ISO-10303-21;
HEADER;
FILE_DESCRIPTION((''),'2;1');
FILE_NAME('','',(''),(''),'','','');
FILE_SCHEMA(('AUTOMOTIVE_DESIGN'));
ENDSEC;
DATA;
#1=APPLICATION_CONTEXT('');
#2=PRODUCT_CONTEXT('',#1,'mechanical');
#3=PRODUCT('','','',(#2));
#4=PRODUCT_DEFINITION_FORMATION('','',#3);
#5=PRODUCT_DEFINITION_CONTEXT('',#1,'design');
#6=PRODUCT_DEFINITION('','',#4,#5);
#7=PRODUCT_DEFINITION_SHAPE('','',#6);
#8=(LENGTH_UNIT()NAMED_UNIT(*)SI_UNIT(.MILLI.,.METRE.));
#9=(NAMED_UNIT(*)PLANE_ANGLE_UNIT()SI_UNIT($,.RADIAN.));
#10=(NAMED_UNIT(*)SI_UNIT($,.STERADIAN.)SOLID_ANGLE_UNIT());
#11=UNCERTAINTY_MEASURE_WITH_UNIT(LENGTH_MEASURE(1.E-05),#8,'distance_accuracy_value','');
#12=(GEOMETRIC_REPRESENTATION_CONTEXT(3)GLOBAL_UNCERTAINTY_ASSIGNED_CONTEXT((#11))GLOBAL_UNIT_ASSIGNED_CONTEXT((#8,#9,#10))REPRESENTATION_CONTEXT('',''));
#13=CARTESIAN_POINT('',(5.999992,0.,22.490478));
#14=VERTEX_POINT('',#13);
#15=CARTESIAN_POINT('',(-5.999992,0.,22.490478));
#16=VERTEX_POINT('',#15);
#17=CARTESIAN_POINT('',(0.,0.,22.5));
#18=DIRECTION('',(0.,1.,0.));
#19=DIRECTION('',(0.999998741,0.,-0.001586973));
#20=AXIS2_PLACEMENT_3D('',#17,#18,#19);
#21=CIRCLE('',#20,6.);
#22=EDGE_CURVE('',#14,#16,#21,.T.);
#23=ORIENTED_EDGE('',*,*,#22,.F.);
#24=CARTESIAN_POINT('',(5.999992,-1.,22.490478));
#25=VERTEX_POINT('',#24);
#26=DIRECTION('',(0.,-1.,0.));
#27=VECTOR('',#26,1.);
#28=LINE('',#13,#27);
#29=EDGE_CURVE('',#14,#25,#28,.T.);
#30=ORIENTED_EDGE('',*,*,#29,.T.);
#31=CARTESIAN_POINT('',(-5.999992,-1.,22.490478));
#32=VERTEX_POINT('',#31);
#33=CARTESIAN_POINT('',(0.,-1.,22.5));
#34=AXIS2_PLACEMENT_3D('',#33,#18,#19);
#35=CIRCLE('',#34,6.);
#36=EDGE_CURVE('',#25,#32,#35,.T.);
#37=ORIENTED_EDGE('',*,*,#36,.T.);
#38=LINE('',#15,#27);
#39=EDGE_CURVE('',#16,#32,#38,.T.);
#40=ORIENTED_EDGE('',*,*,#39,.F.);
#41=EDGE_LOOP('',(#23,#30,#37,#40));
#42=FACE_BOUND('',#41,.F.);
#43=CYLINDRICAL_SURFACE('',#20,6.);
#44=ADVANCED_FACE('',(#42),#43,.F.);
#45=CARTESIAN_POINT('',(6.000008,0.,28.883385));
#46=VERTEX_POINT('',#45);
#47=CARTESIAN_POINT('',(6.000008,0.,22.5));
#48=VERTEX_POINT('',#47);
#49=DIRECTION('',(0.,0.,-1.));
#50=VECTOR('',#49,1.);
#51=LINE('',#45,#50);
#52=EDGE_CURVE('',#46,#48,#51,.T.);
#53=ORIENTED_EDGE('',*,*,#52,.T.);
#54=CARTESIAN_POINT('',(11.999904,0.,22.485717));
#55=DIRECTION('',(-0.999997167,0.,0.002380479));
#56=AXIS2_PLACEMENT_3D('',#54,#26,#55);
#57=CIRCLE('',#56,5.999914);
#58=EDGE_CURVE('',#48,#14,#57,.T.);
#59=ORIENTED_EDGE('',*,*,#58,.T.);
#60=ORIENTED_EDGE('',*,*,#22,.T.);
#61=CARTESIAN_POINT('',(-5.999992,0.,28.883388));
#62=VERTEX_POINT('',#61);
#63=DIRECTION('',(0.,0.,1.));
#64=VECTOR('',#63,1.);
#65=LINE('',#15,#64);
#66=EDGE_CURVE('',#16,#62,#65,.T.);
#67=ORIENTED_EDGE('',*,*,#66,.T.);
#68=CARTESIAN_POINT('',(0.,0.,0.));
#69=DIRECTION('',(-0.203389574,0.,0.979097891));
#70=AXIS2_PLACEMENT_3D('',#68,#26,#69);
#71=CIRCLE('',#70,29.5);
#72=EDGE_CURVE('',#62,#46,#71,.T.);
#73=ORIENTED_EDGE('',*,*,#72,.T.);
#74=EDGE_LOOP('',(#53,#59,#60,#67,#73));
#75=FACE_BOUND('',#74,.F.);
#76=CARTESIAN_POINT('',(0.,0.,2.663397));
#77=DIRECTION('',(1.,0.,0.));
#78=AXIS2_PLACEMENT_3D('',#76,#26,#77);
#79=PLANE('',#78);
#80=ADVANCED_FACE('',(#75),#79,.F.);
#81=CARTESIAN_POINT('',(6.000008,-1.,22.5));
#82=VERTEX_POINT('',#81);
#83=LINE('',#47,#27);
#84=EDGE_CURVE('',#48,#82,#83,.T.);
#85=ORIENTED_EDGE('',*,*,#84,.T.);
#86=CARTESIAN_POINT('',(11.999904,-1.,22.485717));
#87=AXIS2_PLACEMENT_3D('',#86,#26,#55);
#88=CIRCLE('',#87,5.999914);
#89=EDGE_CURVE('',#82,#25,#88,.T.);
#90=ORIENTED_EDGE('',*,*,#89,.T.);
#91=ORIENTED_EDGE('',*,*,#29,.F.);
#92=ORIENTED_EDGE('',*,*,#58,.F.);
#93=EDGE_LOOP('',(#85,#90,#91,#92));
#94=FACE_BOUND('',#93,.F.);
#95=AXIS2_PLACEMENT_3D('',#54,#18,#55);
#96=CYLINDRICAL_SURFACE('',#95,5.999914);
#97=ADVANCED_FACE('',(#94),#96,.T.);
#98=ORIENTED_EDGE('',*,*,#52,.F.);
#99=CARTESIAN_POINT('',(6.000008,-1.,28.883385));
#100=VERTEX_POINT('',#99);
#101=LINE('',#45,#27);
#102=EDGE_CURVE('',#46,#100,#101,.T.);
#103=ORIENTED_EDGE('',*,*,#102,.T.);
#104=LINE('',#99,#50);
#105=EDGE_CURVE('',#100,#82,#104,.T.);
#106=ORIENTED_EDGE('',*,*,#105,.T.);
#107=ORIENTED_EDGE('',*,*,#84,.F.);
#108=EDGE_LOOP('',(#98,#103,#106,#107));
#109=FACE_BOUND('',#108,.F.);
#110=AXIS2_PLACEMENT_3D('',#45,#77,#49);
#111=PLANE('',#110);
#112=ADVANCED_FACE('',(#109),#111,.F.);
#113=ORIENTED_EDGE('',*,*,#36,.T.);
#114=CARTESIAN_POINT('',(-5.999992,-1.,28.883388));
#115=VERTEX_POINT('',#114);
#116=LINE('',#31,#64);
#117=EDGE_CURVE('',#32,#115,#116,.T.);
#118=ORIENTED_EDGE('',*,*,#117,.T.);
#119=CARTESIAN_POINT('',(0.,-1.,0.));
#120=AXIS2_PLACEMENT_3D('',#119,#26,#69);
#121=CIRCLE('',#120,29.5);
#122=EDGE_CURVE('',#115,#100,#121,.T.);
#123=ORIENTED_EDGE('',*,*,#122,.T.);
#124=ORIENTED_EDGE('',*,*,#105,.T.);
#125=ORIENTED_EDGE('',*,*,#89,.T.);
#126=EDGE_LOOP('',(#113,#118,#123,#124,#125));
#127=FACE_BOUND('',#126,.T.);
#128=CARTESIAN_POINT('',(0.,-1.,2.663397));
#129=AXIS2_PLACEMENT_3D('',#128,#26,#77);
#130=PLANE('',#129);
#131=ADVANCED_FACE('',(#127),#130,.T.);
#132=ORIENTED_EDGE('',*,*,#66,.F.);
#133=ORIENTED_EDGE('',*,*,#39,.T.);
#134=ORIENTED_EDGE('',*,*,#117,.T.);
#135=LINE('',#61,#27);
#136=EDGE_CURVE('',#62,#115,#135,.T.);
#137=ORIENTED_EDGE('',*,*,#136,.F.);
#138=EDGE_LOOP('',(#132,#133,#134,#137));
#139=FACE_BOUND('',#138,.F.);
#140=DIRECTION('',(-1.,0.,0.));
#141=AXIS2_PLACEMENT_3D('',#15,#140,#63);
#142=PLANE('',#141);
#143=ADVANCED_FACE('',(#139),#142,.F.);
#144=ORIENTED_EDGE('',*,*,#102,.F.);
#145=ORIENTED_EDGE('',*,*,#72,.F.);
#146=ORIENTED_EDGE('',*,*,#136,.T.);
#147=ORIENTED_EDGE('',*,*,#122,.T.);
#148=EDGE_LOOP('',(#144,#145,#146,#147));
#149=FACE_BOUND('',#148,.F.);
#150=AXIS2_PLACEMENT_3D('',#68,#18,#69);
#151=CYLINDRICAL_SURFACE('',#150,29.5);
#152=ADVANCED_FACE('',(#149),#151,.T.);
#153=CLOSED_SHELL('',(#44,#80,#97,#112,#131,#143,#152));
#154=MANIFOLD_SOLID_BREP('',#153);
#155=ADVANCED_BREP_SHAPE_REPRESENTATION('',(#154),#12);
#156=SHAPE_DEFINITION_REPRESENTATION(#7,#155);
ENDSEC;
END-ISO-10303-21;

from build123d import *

# Parameters (mm, degrees)
F1_DEPTH = 1


# Not quite as in the source:
# - ends of sketch curves that miss each other by under 0.0002 mm in the source are joined


with BuildPart() as f1:
    # F0 (on Front) → F1 (new body)
    with BuildSketch(Plane.XZ):
        with BuildLine():
            ThreePointArc((-5.9999924445, 28.8833877976), (-18.6178707548, -22.8828514079), (29.5, 0))
            ThreePointArc((29.5, 0), (22.8828562781, 18.617864769), (6.0000075555, 28.8833846586))
            Line((6.0000075555, 28.8833846586), (6.0000075555, 22.5))
            ThreePointArc((6.0000075555, 22.5), (5.9999981111, 22.4952390788), (5.9999924445, 22.4904781605))
            ThreePointArc((5.9999924445, 22.4904781605), (1.2e-08, 16.5), (-5.9999924445, 22.4904781366))
            Line((-5.9999924445, 22.4904781366), (-5.9999924445, 28.8833877976))
        make_face()
    extrude(amount=F1_DEPTH)


solid = f1.part
